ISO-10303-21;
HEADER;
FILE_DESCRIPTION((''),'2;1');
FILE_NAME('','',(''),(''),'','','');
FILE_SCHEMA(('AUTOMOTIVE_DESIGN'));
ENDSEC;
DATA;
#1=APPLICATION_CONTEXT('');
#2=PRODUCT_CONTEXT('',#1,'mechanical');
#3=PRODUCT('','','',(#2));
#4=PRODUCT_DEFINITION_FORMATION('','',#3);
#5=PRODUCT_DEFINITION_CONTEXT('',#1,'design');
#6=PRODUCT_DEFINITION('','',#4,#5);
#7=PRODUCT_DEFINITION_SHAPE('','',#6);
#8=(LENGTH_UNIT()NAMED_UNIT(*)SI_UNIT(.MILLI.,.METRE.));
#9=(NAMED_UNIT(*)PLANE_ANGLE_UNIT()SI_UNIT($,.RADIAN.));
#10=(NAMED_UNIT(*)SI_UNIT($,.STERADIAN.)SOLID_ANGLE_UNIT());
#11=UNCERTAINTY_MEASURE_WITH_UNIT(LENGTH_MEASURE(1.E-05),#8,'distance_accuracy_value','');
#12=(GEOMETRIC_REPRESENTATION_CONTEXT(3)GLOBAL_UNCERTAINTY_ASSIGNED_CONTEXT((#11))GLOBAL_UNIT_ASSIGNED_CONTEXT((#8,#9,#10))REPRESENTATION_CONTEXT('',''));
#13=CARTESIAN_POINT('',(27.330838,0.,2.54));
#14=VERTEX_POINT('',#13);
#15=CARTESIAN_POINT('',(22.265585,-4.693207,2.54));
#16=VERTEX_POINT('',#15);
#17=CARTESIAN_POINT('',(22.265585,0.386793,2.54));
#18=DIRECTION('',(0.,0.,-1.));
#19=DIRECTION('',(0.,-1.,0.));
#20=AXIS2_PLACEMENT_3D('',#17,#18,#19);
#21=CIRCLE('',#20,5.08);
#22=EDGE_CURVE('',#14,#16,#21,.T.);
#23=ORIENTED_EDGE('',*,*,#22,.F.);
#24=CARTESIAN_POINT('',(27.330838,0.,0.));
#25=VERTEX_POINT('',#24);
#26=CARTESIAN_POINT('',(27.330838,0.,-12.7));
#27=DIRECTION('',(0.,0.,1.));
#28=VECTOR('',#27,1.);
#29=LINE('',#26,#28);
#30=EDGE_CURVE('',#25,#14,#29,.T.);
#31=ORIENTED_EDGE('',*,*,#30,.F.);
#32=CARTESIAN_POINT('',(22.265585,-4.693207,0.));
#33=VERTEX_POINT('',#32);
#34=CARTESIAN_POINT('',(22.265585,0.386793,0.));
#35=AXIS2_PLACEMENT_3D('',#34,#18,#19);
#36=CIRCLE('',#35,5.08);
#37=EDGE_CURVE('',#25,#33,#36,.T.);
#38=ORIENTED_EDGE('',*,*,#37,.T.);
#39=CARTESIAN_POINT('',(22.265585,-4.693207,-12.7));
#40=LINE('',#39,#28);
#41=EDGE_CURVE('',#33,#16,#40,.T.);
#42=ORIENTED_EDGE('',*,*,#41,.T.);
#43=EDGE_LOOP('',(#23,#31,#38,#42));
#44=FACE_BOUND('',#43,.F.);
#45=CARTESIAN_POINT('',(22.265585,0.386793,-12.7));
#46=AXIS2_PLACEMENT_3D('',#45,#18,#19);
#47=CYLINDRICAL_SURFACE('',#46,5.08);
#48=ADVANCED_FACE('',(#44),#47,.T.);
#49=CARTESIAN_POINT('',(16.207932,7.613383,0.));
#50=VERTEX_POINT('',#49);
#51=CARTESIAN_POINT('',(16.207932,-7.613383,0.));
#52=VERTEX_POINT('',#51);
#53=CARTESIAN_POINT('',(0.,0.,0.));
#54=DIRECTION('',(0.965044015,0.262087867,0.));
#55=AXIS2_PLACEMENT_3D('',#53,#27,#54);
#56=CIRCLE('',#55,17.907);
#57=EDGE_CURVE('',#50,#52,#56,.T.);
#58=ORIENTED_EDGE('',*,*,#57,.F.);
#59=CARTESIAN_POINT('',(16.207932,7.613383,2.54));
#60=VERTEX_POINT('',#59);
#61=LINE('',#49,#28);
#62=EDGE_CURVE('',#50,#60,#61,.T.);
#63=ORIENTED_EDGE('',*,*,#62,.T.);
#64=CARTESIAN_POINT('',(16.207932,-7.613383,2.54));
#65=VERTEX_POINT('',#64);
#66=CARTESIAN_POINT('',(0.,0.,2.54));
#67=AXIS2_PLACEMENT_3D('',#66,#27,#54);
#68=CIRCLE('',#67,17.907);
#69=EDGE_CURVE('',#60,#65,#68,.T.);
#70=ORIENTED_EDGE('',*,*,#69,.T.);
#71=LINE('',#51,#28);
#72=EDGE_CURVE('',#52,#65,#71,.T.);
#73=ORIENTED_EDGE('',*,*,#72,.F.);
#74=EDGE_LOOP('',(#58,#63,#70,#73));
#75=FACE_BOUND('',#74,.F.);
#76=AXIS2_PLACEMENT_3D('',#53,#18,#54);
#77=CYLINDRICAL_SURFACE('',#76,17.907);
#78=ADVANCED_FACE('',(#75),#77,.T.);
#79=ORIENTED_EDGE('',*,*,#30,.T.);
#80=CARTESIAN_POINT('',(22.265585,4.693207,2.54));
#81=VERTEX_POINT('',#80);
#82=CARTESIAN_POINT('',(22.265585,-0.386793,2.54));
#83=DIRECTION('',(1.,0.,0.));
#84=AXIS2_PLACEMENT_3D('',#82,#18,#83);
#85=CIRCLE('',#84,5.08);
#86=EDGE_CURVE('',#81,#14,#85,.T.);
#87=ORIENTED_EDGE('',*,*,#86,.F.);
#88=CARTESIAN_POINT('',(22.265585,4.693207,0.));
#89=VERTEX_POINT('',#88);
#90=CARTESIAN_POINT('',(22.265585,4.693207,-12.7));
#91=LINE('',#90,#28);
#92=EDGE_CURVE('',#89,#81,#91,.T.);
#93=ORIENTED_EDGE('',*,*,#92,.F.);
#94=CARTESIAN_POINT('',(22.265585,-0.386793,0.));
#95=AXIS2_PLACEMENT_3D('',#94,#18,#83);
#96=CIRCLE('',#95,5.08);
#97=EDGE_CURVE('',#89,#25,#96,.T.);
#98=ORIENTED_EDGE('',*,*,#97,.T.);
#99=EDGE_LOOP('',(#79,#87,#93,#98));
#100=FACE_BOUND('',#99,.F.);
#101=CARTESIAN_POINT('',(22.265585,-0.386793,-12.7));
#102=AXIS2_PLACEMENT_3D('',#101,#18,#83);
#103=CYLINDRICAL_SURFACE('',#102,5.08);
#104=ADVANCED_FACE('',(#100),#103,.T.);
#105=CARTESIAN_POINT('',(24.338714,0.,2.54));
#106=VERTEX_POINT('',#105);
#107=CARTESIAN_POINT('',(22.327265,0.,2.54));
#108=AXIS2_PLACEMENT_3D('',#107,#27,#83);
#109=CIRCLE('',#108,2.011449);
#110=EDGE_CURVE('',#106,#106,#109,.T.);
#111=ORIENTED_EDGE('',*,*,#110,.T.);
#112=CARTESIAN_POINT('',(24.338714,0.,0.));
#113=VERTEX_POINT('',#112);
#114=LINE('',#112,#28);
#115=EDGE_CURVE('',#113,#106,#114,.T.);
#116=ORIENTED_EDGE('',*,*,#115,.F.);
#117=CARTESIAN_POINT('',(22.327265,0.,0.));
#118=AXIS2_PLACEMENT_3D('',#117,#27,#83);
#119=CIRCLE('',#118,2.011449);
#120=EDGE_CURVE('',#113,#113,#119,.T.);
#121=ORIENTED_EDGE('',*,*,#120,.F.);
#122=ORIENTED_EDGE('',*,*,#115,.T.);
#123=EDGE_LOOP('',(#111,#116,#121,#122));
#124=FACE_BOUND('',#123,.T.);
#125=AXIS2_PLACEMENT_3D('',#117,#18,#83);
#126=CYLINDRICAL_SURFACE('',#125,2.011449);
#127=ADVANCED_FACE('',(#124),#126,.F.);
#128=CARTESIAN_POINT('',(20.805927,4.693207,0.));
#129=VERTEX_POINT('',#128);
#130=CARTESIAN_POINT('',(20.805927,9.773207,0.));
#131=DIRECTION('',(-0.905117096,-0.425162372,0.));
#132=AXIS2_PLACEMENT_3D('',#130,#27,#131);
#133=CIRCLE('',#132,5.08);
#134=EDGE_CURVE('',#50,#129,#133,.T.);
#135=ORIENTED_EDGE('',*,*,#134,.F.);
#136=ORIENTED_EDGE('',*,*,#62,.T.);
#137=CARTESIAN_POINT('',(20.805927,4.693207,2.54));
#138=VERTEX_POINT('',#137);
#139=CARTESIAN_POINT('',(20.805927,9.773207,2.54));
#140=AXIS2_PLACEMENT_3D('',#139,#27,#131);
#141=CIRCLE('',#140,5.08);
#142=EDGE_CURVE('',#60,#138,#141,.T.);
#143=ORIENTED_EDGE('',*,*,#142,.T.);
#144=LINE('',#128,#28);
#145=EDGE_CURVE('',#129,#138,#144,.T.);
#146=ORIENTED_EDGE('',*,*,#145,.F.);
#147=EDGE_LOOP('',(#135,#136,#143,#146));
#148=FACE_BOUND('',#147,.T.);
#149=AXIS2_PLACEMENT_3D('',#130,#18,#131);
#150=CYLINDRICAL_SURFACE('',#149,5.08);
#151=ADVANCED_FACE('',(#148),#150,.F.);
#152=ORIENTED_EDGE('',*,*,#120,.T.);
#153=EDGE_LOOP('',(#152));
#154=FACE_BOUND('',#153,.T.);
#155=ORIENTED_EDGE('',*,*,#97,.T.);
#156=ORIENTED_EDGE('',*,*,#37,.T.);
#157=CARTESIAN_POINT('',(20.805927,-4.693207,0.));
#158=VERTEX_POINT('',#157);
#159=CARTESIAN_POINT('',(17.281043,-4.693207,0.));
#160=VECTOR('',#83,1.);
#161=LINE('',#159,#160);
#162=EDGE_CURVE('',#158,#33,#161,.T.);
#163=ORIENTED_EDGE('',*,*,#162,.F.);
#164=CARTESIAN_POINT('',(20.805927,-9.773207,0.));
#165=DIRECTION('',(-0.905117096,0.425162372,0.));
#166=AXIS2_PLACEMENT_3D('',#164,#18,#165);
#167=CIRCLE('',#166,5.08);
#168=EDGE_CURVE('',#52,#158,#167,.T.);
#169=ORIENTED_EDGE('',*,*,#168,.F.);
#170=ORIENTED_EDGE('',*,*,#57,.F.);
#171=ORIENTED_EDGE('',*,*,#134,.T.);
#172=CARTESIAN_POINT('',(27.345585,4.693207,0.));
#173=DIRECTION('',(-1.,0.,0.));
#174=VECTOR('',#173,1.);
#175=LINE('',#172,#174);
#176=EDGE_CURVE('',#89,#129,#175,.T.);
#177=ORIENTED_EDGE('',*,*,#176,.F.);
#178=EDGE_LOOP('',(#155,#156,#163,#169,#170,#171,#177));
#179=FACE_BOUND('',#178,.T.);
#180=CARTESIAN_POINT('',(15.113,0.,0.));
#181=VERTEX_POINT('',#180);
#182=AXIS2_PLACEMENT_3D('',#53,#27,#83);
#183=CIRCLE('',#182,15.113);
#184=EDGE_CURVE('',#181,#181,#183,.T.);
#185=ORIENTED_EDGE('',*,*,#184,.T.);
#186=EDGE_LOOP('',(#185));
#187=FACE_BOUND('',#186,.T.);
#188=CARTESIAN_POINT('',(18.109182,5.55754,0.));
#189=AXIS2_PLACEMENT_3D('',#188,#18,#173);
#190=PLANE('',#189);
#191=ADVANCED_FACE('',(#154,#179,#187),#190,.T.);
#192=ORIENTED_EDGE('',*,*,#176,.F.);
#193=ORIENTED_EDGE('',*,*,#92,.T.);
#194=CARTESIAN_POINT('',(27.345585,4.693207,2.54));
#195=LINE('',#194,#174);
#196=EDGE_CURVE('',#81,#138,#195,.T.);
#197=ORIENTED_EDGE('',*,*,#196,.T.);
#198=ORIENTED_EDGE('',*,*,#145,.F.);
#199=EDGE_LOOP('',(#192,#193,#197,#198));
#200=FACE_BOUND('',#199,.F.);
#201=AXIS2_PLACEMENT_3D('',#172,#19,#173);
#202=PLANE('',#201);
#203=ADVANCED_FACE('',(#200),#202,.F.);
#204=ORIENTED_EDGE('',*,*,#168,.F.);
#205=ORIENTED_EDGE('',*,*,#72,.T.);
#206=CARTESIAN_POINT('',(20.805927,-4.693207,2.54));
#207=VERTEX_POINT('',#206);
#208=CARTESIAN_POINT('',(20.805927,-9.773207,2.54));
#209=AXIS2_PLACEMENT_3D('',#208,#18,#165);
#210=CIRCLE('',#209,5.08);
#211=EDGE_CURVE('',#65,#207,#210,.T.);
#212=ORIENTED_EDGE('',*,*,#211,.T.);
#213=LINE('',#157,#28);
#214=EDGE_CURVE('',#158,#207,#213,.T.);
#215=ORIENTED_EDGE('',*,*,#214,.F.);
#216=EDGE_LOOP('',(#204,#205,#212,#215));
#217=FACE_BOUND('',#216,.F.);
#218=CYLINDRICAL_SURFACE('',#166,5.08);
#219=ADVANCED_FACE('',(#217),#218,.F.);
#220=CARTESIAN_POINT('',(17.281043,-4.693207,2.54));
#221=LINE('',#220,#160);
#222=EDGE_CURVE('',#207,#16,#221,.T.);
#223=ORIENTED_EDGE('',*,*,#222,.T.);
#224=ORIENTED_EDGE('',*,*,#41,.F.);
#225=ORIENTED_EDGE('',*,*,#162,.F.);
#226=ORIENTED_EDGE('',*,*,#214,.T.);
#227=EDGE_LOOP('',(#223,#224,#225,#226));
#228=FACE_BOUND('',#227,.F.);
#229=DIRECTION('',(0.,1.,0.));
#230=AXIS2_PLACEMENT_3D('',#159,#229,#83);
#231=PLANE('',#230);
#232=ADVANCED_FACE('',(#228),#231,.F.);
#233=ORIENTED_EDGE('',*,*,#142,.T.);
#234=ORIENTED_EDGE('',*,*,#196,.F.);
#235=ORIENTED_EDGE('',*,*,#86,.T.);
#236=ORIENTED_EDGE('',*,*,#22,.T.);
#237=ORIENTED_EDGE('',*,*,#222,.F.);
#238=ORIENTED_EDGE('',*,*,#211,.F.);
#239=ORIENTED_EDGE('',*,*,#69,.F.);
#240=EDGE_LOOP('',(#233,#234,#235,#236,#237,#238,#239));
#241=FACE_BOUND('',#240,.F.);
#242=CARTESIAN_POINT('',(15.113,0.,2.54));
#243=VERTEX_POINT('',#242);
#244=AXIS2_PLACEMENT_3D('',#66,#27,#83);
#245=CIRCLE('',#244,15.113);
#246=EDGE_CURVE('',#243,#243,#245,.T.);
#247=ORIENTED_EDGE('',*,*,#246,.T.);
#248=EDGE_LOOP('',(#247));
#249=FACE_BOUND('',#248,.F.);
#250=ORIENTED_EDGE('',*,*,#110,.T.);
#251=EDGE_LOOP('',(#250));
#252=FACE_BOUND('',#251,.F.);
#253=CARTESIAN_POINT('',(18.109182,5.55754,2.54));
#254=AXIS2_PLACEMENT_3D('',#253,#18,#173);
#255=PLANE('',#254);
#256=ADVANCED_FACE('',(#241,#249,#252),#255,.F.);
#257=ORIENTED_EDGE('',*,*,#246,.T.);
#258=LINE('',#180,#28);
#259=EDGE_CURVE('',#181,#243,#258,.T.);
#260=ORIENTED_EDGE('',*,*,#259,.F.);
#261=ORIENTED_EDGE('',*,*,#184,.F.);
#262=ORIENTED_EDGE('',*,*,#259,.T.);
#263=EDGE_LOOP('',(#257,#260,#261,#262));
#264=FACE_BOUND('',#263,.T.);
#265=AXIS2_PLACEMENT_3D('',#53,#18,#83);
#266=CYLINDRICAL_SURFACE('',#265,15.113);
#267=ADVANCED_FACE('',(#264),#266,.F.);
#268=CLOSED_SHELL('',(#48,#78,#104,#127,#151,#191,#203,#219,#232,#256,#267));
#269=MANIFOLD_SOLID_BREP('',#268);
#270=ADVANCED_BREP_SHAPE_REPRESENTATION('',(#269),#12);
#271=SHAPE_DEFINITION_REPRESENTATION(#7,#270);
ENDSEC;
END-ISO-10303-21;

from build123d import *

# Parameters (mm, degrees)
F0_R        = 15.113
F0_R_2      = 2.0114491118
F1_DEPTH    = 2.54
F2_T1_DEPTH = 2.54
F2_T3_DEPTH = 27.94


# Not quite as in the source:
# - a fillet or chamfer that OpenCascade refuses, or shapes differently, is made with other operations: its cross-section is extruded or revolved along the edge and cut away or added


with BuildPart() as f1:
    # F0 (on Top) → F1 (new body)
    with BuildSketch(Plane.XY):
        with BuildLine():
            Line((27.3455847055, 4.693207435), (17.2810431679, 4.693207435))
            ThreePointArc((17.2810431679, 4.693207435), (-17.907, 0), (17.2810431679, -4.693207435))
            Line((17.2810431679, -4.693207435), (27.3455847055, -4.693207435))
            Line((27.3455847055, -4.693207435), (27.3455847055, 4.693207435))
        make_face()
        Circle(F0_R, mode=Mode.SUBTRACT)
        with Locations((22.3272647709, 0)):
            Circle(F0_R_2, mode=Mode.SUBTRACT)
    extrude(amount=F1_DEPTH)

    # F2: fillet of radius 5.08 on 4 edges, made by hand

    # F2_s2 → F2_t1 (join)
    with BuildSketch(Plane.XY):
        with BuildLine():
            ThreePointArc((16.2079318414, 7.6133825875), (18.0824647595, 5.4849496171), (20.8059266901, 4.693207435))
            Line((20.8059266901, 4.693207435), (17.2810431679, 4.693207435))
            ThreePointArc((17.2810431679, 4.693207435), (16.8080253904, 6.1766440301), (16.2079318414, 7.6133825875))
        make_face()
        with BuildLine():
            ThreePointArc((16.2079318414, -7.6133825875), (18.0824647595, -5.4849496171), (20.8059266901, -4.693207435))
            Line((20.8059266901, -4.693207435), (17.2810431679, -4.693207435))
            ThreePointArc((17.2810431679, -4.693207435), (16.8080253904, -6.1766440301), (16.2079318414, -7.6133825875))
        make_face()
    extrude(amount=F2_T1_DEPTH)

    # F2_s4 → F2_t3 (cut)
    with BuildSketch(Plane.XY.offset(-12.7)):
        with BuildLine():
            ThreePointArc((22.2655847055, -4.693207435), (25.8576871539, -3.2053098834), (27.3455847055, 0.386792565))
            Line((27.3455847055, 0.386792565), (27.3455847055, -4.693207435))
            Line((27.3455847055, -4.693207435), (22.2655847055, -4.693207435))
        make_face()
        with BuildLine():
            ThreePointArc((27.3455847055, -0.386792565), (25.8576871539, 3.2053098834), (22.2655847055, 4.693207435))
            Line((22.2655847055, 4.693207435), (27.3455847055, 4.693207435))
            Line((27.3455847055, 4.693207435), (27.3455847055, -0.386792565))
        make_face()
    extrude(amount=F2_T3_DEPTH, mode=Mode.SUBTRACT)


solid = f1.part
